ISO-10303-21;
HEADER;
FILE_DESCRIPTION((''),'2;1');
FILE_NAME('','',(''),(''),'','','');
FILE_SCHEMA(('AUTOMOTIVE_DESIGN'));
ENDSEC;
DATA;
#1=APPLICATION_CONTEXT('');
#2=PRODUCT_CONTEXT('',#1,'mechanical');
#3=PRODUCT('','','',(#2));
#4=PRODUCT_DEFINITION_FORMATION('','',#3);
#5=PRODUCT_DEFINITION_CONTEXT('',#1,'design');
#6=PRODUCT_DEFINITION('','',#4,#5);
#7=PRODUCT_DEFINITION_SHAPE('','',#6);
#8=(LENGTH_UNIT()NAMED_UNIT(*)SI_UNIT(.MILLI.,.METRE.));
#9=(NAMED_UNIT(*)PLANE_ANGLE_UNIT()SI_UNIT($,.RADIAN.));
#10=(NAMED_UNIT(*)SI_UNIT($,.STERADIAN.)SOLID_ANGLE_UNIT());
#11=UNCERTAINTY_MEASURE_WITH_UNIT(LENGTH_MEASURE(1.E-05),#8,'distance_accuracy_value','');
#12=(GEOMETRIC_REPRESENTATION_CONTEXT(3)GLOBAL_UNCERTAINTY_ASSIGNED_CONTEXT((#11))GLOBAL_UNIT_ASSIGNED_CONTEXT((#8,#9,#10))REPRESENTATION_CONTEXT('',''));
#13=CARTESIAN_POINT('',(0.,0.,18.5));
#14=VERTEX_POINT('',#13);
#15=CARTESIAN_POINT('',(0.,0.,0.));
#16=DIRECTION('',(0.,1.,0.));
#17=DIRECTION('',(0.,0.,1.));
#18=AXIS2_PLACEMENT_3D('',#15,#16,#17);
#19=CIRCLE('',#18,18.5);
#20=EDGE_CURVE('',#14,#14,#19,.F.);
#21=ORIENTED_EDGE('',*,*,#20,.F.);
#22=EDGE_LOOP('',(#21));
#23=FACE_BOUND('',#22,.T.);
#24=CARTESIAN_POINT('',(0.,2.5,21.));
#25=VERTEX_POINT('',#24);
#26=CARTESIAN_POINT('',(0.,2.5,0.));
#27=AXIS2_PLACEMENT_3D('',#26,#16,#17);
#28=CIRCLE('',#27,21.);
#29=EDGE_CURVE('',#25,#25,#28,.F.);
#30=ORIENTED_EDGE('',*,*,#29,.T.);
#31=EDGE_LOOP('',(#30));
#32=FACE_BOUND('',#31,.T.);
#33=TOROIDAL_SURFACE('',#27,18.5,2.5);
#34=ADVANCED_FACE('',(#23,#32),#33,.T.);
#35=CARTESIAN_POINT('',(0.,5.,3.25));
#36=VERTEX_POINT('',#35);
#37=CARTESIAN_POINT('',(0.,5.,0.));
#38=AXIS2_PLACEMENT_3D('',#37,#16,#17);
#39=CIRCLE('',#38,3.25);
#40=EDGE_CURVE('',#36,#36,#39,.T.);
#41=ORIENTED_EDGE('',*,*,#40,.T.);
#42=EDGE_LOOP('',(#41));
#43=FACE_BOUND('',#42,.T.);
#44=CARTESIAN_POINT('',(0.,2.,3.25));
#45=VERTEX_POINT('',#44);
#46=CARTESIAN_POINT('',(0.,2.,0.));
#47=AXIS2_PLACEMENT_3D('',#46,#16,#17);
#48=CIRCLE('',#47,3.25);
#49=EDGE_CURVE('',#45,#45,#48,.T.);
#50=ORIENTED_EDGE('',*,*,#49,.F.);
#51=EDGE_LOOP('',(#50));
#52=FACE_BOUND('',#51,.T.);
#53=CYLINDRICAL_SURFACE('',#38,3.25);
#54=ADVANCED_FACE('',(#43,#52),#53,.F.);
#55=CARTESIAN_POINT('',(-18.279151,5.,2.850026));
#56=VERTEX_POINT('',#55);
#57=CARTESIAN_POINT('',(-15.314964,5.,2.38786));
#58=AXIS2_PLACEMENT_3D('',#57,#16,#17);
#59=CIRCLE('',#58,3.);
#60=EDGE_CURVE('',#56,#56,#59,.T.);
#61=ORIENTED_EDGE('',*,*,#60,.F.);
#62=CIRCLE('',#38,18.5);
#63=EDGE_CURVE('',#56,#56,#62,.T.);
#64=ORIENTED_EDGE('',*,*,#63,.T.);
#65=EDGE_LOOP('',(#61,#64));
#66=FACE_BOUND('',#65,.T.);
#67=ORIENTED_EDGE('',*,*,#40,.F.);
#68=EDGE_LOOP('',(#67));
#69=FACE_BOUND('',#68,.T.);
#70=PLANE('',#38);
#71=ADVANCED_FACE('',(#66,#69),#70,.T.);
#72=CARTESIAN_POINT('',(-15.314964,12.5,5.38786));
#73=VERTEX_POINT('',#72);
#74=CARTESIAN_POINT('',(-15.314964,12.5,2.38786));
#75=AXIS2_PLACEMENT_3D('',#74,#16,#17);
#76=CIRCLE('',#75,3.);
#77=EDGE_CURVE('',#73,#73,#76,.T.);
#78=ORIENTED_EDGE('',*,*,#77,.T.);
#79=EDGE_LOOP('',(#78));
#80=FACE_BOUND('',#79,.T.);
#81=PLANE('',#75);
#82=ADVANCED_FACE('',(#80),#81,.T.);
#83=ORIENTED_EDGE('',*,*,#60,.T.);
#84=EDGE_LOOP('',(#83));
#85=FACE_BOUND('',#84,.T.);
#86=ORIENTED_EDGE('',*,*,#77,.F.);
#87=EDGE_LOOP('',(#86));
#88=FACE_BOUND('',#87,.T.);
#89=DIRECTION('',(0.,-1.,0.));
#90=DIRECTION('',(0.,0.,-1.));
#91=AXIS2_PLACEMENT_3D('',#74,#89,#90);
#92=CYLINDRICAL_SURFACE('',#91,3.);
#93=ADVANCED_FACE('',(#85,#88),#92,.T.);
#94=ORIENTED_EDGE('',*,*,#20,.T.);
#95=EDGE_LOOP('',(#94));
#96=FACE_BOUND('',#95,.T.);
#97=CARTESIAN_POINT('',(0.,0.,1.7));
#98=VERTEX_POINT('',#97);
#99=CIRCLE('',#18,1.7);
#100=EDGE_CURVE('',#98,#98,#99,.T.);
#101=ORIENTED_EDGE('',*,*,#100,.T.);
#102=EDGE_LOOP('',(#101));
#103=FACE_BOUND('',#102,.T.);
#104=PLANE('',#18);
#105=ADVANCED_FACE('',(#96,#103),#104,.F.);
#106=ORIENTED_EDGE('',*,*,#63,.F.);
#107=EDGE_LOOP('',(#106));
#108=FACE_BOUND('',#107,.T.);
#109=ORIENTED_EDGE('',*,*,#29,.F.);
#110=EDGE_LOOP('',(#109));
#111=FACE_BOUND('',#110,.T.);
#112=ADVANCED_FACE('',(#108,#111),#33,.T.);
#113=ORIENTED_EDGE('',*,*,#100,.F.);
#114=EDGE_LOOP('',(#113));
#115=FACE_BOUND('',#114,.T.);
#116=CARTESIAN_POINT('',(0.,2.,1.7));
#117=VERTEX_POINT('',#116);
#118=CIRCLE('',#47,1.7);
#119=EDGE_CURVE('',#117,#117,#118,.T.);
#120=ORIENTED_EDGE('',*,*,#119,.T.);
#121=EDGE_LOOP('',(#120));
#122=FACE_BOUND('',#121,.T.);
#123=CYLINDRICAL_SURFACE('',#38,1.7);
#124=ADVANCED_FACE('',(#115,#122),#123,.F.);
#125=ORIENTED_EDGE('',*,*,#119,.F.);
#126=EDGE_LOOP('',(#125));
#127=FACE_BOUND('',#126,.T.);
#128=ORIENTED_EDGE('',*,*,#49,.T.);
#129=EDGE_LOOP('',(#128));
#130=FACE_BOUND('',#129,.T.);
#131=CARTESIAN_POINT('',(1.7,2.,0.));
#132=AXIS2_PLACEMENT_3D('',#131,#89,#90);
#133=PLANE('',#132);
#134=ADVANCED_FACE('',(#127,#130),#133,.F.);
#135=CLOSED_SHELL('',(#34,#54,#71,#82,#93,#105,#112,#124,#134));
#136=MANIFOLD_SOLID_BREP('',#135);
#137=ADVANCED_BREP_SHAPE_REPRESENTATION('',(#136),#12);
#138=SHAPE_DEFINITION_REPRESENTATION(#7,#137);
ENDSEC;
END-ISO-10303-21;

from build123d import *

# Parameters (mm, degrees)
SKETCH1_R                      = 21
BOSS_EXTRUDE1_DEPTH            = 5
FILLET1_R                      = 2.5
SKETCH2_R                      = 3
BOSS_EXTRUDE2_DEPTH            = 7.5
CBORE_FOR_M3_SHCS1_D           = 3.4
CBORE_FOR_M3_SHCS1_CBORE_D     = 6.5
CBORE_FOR_M3_SHCS1_CBORE_DEPTH = 3


with BuildPart() as part:
    # Sketch1 → Boss-Extrude1 (new body)
    with BuildSketch(Plane(origin=(0, 0, 0), x_dir=(1, 0, 0), z_dir=(0, 1, 0))):
        with Locations(Location((0, 0, 0), (0, 0, 270))):
            Circle(SKETCH1_R)
    extrude(amount=BOSS_EXTRUDE1_DEPTH)

    # Fillet1
    fillet1_edges = [part.edges().sort_by_distance(p)[0] for p in [
        (0, 0, -21),
        (0, 5, -21),
    ]]
    fillet(fillet1_edges, radius=FILLET1_R - 0.0001)  # a hair under: the kernel refuses the full size

    # Sketch2 → Boss-Extrude2 (add)
    with BuildSketch(Plane(origin=(0, 5, 0), x_dir=(1, 0, 0), z_dir=(0, 1, 0))):
        with Locations(Location((-15.314964139, -2.387859588, 0), (0, 0, 188.862019992))):
            Circle(SKETCH2_R)
    extrude(amount=BOSS_EXTRUDE2_DEPTH)

    # CBORE for M3 SHCS1 (through all)
    with Locations(Plane(origin=(0, 5, 0), x_dir=(1, 0, 0), z_dir=(0, 1, 0))):
        with Locations((0, 0)):
            CounterBoreHole(CBORE_FOR_M3_SHCS1_D / 2, CBORE_FOR_M3_SHCS1_CBORE_D / 2, CBORE_FOR_M3_SHCS1_CBORE_DEPTH)


solid = part.part
